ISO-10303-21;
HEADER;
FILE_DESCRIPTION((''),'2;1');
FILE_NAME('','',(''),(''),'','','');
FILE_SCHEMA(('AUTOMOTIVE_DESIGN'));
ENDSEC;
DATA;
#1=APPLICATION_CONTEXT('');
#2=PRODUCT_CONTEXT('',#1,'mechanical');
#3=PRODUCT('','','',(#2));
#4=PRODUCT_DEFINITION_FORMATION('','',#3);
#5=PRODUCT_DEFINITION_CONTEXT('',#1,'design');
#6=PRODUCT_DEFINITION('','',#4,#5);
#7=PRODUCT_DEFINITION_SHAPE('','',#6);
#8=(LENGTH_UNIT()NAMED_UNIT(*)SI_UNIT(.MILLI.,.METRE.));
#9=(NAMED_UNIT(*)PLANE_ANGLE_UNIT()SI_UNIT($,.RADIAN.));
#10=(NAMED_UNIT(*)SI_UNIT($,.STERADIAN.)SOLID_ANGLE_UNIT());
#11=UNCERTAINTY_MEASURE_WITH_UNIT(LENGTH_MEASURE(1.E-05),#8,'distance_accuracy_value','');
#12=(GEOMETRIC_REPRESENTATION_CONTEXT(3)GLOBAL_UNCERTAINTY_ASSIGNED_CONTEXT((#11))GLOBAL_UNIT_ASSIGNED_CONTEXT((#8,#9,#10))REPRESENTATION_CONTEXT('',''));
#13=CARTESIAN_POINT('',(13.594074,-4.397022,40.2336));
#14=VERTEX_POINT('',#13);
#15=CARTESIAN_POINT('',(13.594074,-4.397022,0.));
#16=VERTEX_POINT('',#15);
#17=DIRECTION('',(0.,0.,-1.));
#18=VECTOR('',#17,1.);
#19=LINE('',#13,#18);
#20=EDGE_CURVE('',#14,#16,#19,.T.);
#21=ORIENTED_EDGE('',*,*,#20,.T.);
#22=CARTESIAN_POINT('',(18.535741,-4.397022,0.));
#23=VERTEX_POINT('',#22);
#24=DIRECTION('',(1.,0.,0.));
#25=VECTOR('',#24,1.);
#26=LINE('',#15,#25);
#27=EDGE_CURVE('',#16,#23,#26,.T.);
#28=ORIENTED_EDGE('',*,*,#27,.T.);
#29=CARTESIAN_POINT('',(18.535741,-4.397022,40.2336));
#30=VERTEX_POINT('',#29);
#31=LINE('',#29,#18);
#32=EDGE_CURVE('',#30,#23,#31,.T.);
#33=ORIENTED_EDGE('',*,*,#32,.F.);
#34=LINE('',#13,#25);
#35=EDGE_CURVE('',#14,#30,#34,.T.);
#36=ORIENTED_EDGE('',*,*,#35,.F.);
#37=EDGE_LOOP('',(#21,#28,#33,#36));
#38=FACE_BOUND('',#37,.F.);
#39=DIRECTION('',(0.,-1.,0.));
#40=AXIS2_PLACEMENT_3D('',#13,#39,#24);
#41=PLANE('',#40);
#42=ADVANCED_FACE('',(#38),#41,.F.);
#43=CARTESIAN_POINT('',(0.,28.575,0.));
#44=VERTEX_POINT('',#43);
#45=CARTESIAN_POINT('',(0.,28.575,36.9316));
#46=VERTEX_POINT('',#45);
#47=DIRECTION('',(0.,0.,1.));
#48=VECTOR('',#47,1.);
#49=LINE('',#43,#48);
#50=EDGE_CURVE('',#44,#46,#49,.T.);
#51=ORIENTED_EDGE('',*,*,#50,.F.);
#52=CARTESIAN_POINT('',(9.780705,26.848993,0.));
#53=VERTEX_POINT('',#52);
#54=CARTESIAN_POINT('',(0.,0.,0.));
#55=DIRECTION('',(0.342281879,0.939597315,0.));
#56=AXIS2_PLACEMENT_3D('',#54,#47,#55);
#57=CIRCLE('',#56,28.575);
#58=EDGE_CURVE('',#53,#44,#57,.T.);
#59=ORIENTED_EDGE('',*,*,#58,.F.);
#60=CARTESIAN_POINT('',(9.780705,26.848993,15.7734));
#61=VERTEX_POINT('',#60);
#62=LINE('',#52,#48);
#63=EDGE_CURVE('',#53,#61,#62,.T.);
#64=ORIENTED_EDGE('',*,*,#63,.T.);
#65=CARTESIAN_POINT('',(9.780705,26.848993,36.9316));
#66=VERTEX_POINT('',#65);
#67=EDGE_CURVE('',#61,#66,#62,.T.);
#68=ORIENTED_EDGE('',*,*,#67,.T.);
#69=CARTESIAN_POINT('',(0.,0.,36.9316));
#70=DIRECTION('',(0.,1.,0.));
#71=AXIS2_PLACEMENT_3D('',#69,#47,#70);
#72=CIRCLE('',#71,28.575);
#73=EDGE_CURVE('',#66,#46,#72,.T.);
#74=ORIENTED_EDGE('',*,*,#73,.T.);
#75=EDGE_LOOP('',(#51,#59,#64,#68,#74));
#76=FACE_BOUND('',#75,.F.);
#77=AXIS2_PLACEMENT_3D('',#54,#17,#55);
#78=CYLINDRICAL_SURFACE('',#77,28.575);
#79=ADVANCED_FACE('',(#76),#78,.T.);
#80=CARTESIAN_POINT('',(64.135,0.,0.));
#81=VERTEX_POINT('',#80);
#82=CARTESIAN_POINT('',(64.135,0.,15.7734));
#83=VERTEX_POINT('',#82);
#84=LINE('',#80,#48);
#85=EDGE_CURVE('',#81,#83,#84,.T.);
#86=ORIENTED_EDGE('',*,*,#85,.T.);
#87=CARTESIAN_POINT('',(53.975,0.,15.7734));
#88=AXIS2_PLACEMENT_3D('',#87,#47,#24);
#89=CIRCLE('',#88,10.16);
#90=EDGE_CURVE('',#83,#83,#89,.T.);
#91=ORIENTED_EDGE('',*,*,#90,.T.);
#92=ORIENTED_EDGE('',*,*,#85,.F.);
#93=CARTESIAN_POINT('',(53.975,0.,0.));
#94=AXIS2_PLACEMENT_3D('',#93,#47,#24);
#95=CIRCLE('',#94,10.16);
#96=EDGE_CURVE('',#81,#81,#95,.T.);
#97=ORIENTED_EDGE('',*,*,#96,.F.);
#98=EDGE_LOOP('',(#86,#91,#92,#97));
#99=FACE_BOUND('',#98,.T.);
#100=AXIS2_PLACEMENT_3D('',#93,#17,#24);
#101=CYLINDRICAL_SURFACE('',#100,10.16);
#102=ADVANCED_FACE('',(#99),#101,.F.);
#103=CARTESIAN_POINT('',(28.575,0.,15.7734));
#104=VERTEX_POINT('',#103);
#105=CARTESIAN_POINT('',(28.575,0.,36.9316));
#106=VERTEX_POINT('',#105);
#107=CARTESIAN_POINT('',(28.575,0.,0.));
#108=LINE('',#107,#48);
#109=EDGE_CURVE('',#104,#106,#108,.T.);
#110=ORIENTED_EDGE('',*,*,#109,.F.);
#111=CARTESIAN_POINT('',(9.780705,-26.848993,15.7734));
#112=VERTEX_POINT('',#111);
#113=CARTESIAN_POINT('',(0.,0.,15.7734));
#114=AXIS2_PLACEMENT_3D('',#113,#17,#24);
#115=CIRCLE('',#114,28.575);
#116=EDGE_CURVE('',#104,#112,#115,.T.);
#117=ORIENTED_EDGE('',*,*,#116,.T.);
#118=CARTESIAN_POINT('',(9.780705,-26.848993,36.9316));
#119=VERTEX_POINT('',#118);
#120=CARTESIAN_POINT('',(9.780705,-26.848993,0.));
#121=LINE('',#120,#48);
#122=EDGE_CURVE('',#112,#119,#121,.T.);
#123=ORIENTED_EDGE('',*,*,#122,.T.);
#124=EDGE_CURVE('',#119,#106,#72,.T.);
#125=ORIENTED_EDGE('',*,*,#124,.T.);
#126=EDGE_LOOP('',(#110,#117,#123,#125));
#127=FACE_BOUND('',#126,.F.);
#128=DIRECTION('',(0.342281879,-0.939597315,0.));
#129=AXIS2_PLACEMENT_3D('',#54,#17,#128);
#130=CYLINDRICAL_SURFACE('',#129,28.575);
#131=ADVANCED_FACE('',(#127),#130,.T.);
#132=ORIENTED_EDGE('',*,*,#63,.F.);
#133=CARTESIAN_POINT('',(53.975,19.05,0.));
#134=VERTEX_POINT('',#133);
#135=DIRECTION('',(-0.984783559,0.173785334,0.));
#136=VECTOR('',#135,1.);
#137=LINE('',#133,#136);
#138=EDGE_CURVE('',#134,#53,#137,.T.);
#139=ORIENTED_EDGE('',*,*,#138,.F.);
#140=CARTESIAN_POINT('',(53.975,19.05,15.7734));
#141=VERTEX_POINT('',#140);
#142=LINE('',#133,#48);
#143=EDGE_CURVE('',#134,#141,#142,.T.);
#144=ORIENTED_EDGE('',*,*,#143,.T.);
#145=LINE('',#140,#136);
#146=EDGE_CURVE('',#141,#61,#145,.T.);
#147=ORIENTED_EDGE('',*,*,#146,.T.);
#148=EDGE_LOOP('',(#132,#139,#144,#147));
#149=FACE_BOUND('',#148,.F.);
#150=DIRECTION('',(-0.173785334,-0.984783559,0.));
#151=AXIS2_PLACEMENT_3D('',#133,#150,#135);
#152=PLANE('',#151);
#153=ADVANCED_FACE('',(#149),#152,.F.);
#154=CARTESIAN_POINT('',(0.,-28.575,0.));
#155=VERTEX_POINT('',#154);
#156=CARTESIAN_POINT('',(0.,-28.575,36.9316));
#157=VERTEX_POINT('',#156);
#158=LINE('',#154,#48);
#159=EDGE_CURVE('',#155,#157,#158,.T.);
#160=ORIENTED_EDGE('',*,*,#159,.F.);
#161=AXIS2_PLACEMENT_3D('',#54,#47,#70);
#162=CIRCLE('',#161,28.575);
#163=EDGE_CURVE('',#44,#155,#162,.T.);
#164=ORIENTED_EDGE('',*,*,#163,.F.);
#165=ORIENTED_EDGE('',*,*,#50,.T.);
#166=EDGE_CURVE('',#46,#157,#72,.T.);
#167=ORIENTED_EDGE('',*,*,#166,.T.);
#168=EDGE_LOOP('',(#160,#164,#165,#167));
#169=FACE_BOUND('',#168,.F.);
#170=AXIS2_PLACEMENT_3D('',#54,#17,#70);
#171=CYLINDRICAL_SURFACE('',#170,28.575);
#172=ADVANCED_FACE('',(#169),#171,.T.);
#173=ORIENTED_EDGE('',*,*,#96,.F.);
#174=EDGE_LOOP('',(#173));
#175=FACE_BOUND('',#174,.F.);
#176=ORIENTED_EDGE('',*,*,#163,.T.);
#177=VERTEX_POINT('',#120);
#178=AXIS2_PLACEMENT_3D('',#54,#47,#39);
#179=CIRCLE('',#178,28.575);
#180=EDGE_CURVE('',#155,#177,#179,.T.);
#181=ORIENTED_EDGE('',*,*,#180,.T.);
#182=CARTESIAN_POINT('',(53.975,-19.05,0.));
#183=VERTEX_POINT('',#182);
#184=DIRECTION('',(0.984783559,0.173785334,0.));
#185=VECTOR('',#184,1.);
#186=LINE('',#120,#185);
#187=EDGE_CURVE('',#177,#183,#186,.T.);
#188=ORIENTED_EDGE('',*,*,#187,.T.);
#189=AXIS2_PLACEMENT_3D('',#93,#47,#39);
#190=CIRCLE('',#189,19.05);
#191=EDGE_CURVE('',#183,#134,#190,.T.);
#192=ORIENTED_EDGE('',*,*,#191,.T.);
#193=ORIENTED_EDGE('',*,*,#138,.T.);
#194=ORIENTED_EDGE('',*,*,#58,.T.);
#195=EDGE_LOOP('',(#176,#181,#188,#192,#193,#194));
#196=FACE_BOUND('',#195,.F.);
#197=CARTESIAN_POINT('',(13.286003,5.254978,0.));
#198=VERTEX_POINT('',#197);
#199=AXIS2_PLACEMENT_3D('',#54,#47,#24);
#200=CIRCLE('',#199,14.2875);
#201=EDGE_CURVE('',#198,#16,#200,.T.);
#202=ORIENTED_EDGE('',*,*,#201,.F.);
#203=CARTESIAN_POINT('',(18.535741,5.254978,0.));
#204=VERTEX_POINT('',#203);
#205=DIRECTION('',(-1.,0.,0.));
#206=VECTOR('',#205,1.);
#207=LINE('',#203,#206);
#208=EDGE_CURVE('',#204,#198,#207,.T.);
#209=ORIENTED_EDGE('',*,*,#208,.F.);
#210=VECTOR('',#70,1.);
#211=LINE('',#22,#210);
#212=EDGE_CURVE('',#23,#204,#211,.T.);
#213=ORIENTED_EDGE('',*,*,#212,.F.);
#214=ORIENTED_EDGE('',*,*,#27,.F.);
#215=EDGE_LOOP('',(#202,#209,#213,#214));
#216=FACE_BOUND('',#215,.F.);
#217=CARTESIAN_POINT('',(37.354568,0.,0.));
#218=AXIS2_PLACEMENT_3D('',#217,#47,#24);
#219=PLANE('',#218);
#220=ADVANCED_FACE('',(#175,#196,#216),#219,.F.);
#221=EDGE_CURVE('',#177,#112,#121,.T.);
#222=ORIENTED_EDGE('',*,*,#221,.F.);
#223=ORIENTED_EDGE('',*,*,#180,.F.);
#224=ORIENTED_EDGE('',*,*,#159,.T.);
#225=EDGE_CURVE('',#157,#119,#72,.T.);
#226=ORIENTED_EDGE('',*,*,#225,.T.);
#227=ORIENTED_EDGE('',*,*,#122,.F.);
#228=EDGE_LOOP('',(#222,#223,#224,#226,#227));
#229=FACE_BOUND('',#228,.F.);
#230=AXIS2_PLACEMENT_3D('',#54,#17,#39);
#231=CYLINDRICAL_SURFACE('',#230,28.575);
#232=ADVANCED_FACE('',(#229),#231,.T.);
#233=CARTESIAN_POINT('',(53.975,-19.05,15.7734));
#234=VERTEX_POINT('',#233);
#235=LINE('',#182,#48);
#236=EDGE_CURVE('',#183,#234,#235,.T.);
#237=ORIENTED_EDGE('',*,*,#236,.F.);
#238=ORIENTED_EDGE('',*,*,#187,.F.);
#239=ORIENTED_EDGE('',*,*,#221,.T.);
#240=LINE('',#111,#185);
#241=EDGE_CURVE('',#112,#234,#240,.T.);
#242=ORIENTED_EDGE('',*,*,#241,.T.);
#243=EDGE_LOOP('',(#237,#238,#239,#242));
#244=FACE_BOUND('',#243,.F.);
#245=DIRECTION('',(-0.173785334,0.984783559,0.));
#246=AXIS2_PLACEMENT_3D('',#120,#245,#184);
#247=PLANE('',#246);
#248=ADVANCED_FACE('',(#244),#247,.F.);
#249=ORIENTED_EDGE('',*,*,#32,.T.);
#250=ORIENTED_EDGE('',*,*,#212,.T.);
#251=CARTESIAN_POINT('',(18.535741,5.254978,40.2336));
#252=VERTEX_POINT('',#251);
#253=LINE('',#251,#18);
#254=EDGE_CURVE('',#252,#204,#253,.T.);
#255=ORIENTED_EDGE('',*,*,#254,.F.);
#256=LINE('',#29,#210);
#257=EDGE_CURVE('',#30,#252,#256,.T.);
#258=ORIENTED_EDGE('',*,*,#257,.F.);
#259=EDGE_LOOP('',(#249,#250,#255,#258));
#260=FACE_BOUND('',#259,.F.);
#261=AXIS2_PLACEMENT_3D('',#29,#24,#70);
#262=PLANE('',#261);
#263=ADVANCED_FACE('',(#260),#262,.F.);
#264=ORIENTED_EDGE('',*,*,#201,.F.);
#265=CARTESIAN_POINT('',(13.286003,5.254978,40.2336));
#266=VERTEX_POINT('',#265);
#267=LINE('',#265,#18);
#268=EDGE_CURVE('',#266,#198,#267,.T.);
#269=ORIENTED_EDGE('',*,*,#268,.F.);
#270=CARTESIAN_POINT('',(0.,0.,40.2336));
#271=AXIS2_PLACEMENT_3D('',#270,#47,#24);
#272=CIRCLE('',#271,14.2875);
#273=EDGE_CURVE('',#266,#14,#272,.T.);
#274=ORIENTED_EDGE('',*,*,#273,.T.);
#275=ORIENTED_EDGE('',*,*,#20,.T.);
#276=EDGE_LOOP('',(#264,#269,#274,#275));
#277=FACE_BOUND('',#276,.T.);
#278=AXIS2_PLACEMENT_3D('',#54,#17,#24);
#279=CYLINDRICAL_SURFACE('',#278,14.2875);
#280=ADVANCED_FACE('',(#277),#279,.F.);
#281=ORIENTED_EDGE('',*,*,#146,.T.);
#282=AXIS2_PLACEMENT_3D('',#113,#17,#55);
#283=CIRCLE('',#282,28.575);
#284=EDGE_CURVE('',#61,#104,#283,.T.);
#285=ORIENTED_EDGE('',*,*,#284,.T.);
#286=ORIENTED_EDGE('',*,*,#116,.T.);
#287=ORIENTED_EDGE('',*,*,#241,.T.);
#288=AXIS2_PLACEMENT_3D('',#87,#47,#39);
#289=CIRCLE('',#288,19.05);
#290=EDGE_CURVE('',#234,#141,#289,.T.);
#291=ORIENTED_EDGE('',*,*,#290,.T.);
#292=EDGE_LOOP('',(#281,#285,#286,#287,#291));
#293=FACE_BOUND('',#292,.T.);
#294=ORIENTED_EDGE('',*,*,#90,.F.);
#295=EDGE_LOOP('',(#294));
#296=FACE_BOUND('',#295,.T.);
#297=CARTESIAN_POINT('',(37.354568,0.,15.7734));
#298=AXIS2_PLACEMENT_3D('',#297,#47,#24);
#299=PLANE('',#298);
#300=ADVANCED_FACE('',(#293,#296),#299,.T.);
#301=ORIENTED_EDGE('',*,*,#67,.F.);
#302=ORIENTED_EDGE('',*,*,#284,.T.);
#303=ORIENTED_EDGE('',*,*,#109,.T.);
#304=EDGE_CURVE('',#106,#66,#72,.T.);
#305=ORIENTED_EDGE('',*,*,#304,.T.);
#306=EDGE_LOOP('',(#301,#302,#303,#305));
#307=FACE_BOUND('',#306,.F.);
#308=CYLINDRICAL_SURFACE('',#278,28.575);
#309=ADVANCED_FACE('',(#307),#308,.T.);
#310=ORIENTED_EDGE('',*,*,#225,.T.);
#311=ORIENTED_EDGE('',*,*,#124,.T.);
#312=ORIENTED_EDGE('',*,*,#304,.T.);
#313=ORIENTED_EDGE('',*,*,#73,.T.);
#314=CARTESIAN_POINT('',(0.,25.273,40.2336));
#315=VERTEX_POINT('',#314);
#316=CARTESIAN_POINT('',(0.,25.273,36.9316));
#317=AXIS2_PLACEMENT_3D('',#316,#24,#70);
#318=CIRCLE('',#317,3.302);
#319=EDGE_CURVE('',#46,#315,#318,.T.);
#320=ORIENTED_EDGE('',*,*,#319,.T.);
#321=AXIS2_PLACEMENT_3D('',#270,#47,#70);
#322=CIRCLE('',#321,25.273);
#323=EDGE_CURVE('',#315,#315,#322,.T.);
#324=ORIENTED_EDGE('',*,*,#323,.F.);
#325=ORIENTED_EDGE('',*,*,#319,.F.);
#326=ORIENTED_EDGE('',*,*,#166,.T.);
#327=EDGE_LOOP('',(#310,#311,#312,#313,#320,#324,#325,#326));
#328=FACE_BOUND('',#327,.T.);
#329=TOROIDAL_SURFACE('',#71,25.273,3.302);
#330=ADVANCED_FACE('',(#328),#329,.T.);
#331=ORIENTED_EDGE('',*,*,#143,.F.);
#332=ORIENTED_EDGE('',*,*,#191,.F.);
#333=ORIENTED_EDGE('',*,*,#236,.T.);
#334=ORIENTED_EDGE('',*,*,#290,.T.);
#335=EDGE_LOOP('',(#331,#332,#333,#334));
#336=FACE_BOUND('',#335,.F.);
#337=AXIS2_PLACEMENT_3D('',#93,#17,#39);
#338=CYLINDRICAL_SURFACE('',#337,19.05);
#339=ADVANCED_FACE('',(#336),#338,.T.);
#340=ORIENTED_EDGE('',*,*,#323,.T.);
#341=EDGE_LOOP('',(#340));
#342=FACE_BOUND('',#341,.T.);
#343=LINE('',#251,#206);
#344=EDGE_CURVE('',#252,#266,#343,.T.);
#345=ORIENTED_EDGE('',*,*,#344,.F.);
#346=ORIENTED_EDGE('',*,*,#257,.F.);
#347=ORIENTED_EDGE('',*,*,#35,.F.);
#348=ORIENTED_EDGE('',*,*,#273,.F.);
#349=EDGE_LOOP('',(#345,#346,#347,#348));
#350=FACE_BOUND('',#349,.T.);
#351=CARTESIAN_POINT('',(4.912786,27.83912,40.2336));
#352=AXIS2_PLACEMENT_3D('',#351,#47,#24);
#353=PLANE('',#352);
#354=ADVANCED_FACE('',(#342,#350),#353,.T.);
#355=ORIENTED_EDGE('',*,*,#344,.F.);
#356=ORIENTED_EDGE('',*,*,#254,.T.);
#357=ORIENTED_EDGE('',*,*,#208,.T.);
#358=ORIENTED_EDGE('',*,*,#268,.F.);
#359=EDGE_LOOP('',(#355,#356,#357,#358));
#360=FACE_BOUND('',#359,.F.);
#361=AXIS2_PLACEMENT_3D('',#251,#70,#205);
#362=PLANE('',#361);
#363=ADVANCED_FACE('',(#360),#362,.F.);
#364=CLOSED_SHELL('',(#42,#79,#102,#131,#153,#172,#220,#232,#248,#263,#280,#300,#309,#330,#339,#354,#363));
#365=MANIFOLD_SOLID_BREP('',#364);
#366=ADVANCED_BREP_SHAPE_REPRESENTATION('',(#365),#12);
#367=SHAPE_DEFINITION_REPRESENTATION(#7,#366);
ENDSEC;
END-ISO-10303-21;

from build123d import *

# Parameters (mm, degrees)
F0_R     = 14.2875
F1_DEPTH = 40.2336
F0_R_2   = 10.16
F2_DEPTH = 15.7734
F4_DEPTH = 40.2336


# Not quite as in the source:
# - a fillet or chamfer that OpenCascade refuses, or shapes differently, is made with other operations: its cross-section is extruded or revolved along the edge and cut away or added


with BuildPart() as f1:
    # F0 (on Top) → F1 (new body)
    with BuildSketch(Plane.XY):
        with BuildLine():
            ThreePointArc((9.780704698, 26.8489932886), (4.9659159165, 28.1401901932), (0, 28.575))
            Line((0, 28.575), (9.780704698, 26.8489932886))
        make_face()
        with BuildLine():
            Line((9.780704698, -26.8489932886), (0, -28.575))
            ThreePointArc((0, -28.575), (4.9659159165, -28.1401901932), (9.780704698, -26.8489932886))
        make_face()
        with BuildLine():
            Line((9.780704698, 26.8489932886), (0, 28.575))
            ThreePointArc((0, 28.575), (-28.575, 0), (0, -28.575))
            Line((0, -28.575), (9.780704698, -26.8489932886))
            ThreePointArc((9.780704698, -26.8489932886), (23.4095521288, -16.3866864902), (28.575, 0))
            ThreePointArc((28.575, 0), (23.4095521288, 16.3866864902), (9.780704698, 26.8489932886))
        make_face()
        Circle(F0_R, mode=Mode.SUBTRACT)
    extrude(amount=F1_DEPTH)

    # F0 (on Top) → F2 (join)
    with BuildSketch(Plane.XY):
        with BuildLine():
            Line((53.975, 19.05), (9.780704698, 26.8489932886))
            ThreePointArc((9.780704698, 26.8489932886), (23.4095521288, 16.3866864902), (28.575, 0))
            ThreePointArc((28.575, 0), (23.4095521288, -16.3866864902), (9.780704698, -26.8489932886))
            Line((9.780704698, -26.8489932886), (53.975, -19.05))
            ThreePointArc((53.975, -19.05), (73.025, 0), (53.975, 19.05))
        make_face()
        with Locations((53.975, 0)):
            Circle(F0_R_2, mode=Mode.SUBTRACT)
    extrude(amount=F2_DEPTH)

    # F3 (on face) → F4 (cut, through all)
    with BuildSketch(Plane.XY.offset(40.2336)):
        with BuildLine():
            Line((18.5357414117, 5.2549776766), (13.2860026294, 5.2549776766))
            ThreePointArc((13.2860026294, 5.2549776766), (14.0348925685, 2.6747797744), (14.2875, 0))
            ThreePointArc((14.2875, 0), (14.1130788652, -2.2256821862), (13.5940741111, -4.3970223234))
            Line((13.5940741111, -4.3970223234), (18.5357414117, -4.3970223234))
            Line((18.5357414117, -4.3970223234), (18.5357414117, 5.2549776766))
        make_face()
    extrude(amount=-F4_DEPTH, mode=Mode.SUBTRACT)

    # F5: fillet of radius 3.302 on 1 edges, made by hand

    # F5_s1 → F5_t2 (revolve, cut)
    with BuildSketch(Plane.YZ):
        with BuildLine():
            ThreePointArc((28.575, 36.9316), (27.6078665915, 39.2664665915), (25.273, 40.2336))
            Line((25.273, 40.2336), (28.575, 40.2336))
            Line((28.575, 40.2336), (28.575, 36.9316))
        make_face()
    revolve(axis=Axis((0, 0, 40.2336), (0, 0, 1)), mode=Mode.SUBTRACT)


solid = f1.part
